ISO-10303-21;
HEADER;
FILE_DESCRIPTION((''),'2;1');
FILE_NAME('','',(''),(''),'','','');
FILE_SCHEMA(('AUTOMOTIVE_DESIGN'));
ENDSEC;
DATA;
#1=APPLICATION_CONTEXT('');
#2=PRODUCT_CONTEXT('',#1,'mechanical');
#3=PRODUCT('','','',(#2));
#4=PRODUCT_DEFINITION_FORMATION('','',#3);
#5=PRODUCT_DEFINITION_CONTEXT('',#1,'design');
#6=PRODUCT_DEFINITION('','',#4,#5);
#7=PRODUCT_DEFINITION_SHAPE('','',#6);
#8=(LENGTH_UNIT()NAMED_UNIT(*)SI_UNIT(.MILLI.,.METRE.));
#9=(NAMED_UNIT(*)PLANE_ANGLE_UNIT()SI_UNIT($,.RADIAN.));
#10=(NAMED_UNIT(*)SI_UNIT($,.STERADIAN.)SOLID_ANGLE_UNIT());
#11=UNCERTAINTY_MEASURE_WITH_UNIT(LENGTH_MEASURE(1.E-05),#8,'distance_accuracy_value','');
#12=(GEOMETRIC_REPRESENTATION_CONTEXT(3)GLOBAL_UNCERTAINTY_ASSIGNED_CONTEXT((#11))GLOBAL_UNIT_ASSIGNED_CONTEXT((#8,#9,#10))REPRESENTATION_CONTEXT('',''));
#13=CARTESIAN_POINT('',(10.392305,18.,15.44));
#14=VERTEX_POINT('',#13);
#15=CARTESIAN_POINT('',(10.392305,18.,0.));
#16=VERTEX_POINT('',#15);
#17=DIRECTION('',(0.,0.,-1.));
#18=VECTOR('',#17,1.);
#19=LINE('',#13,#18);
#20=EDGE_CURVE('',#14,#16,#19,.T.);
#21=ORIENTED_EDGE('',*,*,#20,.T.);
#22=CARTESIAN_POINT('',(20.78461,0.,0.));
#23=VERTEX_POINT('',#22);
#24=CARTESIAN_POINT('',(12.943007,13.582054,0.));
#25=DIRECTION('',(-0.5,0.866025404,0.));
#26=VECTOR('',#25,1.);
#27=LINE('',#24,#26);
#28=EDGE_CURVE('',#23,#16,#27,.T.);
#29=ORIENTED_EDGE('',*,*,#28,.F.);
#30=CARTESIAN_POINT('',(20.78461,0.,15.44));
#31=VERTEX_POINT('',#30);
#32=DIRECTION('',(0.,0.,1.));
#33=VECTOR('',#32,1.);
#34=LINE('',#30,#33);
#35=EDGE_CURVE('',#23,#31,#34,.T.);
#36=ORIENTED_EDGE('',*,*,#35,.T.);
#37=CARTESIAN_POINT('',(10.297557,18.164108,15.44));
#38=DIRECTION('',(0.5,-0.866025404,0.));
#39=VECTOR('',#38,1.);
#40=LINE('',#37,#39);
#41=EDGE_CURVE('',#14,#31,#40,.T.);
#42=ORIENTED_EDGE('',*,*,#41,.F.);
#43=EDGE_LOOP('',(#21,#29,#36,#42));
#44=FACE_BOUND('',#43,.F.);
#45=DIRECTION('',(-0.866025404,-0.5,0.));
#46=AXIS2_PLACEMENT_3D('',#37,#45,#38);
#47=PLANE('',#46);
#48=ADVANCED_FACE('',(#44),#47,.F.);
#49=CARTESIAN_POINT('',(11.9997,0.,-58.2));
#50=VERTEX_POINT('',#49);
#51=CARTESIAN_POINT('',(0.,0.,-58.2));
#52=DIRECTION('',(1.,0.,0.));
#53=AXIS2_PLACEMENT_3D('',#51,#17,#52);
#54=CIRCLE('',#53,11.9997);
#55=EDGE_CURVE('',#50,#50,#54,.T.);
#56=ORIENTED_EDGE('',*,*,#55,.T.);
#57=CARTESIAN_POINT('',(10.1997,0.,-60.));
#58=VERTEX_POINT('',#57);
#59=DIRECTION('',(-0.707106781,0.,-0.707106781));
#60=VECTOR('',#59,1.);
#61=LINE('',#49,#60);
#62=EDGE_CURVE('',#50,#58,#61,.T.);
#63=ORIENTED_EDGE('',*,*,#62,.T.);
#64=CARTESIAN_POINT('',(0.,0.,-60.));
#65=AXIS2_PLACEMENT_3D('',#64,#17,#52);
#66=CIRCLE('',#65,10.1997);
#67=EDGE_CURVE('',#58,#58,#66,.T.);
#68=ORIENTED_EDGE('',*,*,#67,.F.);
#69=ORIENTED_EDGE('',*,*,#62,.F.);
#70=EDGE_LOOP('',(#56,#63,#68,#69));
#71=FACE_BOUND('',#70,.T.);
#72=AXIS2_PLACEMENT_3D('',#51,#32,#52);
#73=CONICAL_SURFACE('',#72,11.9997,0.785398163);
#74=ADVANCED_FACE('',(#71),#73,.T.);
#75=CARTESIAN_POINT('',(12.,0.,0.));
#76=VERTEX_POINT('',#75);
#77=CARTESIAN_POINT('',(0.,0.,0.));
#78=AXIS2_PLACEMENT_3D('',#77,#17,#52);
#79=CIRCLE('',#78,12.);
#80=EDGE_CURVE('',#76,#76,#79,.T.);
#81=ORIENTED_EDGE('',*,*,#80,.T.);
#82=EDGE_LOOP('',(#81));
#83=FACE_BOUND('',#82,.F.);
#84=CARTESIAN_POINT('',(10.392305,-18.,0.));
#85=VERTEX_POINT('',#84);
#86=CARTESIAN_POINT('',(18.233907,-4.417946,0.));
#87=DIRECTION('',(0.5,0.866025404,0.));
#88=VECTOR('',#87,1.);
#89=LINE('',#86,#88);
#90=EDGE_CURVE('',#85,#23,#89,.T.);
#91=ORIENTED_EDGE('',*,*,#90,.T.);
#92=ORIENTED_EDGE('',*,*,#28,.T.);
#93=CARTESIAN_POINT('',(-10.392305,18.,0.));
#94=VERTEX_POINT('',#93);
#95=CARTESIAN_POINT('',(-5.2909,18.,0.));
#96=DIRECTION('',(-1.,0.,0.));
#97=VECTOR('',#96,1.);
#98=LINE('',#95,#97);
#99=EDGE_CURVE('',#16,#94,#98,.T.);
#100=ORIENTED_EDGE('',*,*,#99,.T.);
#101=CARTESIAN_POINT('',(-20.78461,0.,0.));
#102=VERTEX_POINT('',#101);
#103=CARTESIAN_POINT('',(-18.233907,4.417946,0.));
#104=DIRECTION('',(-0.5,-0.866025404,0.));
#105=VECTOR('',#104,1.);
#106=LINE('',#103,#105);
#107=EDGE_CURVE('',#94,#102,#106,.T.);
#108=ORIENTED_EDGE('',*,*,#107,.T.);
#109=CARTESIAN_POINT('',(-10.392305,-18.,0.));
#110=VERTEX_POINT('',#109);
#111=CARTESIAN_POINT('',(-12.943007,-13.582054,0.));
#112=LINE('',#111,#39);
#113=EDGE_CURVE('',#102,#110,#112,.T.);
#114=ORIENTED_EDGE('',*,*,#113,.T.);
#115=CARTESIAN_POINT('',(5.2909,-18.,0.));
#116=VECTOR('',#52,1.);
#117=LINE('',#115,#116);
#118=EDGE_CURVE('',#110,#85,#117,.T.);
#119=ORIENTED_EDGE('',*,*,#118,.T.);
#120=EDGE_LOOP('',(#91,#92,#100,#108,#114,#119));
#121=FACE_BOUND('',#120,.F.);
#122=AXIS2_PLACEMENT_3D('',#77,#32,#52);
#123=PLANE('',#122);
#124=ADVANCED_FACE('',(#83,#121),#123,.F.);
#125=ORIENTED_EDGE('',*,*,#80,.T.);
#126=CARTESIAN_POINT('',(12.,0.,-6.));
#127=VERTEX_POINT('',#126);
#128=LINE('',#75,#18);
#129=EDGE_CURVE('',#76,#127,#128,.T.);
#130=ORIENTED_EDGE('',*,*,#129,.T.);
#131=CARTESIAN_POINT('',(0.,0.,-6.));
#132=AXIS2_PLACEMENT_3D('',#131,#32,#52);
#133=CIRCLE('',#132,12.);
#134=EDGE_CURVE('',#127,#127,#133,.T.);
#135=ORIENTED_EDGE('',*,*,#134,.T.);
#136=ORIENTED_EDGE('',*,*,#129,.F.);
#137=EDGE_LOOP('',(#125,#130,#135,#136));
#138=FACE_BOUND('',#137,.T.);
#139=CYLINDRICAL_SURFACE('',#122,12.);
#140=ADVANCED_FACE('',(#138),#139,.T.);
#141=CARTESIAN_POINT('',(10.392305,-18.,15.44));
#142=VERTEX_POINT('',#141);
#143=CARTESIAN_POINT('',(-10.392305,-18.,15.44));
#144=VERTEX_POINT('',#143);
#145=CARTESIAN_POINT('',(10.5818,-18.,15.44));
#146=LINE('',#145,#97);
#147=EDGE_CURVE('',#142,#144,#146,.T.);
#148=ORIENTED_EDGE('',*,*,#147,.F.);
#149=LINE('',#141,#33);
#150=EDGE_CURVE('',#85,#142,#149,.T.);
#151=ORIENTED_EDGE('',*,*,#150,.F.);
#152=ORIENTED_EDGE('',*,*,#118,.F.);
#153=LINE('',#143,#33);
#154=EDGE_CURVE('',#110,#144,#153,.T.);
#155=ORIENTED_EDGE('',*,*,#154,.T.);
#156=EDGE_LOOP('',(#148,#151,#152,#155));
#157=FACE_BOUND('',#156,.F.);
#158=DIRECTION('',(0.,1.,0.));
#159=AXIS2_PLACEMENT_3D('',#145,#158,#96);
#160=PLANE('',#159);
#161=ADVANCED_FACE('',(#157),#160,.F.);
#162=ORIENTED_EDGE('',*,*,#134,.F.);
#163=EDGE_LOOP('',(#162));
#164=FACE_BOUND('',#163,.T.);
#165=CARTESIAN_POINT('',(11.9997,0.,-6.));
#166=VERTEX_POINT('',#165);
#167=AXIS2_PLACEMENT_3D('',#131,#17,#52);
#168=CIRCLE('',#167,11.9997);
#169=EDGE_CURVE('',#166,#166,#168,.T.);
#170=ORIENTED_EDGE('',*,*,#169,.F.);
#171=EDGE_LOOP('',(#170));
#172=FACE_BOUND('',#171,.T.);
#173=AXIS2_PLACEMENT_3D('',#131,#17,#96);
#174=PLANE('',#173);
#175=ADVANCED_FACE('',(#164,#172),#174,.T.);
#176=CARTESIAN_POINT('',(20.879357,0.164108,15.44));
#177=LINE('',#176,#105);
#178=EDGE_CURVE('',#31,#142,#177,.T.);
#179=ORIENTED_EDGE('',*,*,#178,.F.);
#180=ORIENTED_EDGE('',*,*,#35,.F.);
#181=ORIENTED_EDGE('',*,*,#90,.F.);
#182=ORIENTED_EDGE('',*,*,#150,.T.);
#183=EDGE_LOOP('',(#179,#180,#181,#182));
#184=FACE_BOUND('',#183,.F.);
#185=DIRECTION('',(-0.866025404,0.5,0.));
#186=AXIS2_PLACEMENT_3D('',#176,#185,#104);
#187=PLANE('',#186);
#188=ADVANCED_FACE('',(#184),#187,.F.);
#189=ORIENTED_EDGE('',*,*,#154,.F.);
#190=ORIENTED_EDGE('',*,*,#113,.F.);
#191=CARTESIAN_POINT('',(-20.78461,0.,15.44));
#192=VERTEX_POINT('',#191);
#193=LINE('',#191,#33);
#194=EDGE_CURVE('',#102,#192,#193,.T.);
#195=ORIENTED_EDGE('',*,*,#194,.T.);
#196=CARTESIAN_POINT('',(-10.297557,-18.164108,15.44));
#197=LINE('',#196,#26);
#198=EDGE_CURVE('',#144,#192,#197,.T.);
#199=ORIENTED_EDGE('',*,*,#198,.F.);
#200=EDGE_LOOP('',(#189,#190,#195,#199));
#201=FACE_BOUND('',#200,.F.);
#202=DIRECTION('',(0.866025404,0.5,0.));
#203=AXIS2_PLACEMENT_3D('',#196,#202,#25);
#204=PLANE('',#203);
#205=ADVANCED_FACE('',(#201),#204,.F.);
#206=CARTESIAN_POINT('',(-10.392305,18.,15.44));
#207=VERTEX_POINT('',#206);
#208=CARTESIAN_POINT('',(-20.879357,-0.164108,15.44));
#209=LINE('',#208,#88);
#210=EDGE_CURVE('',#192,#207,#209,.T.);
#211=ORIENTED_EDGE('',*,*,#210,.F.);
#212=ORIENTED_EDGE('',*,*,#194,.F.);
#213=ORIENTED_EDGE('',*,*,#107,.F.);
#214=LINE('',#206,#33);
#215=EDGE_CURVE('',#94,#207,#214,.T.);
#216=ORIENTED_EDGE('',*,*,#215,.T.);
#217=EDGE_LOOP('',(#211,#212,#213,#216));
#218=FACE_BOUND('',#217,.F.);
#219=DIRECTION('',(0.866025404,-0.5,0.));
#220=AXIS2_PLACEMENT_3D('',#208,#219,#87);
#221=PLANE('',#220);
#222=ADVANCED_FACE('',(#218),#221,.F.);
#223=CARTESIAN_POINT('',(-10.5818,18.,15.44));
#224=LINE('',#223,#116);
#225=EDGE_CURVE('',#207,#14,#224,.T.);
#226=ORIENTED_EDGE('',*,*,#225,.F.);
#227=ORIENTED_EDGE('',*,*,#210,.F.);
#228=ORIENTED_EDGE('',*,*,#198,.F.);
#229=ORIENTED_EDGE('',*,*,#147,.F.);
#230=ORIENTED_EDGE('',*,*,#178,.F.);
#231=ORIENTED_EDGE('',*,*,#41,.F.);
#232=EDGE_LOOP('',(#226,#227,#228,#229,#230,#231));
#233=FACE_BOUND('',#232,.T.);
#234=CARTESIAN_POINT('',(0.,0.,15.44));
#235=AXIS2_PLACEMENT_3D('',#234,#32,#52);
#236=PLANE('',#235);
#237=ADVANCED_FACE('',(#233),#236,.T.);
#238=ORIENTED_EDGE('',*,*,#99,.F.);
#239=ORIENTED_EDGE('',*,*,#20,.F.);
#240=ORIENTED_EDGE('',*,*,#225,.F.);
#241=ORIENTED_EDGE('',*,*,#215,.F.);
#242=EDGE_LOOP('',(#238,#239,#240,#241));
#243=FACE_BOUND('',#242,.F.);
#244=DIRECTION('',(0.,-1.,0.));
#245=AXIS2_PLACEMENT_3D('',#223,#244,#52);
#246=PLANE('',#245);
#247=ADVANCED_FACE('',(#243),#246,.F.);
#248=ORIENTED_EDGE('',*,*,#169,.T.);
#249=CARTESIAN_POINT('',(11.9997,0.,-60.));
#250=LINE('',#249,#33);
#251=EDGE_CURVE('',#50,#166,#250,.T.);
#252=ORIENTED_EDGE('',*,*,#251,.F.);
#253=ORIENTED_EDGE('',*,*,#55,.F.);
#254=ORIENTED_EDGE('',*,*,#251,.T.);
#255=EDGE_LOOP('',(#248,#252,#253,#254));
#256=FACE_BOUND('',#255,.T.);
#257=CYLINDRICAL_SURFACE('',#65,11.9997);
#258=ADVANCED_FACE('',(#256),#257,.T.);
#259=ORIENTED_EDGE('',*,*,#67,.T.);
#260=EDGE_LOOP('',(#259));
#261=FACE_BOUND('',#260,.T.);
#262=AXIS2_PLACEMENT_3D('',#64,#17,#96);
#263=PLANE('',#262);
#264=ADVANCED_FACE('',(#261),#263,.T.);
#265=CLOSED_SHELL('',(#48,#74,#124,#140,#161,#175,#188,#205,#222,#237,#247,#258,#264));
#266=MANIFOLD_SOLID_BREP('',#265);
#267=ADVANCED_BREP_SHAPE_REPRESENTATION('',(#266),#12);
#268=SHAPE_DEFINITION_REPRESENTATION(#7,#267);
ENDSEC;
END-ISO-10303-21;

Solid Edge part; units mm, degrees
sketch "Sketch1" plane through (0, 0, 0) normal (0, 0, 1) x (1, 0, 0)
  circle A0 centre (0, 0) radius 20.88
  dimension "D1" = 41.76
extrude "Protrusion1" add sketch "Sketch1" along normal blind 15.44
sketch "Sketch2" plane through (0, 0, 0) normal (0, 0, -1) x (1, 0, 0)
  circle A0 centre (0, 0) radius 12
extrude "Protrusion2" add sketch "Sketch2" along normal blind 60
sketch "Sketch3" plane through (0, 0, -60) normal (0, 0, -1) x (1, 0, 0)
  circle A0 centre (0, 0) radius 11.9997
extrude "Cutout1" cut sketch "Sketch3" against normal blind 54 flip side to cut
chamfer "Chamfer_1" distance 1.8 angle 45 1 edges at (-11.9997, 0, -60)
sketch "Sketch4" plane through (0, 0, 15.44) normal (0, 0, 1) x (1, 0, 0)
  line L0 (-10.5818, 18) -> (10.5818, 18)
  dimension "D1" = 36
extrude "Cutout2" cut sketch "Sketch4" against normal up to next material side at (0, 18.05, 15.44)
pattern_circular "Pattern1" count 6 over 360 about axis through (0, 0, 15.44) along (0, 0, 1) of "Cutout2"
properties part number "108682"
